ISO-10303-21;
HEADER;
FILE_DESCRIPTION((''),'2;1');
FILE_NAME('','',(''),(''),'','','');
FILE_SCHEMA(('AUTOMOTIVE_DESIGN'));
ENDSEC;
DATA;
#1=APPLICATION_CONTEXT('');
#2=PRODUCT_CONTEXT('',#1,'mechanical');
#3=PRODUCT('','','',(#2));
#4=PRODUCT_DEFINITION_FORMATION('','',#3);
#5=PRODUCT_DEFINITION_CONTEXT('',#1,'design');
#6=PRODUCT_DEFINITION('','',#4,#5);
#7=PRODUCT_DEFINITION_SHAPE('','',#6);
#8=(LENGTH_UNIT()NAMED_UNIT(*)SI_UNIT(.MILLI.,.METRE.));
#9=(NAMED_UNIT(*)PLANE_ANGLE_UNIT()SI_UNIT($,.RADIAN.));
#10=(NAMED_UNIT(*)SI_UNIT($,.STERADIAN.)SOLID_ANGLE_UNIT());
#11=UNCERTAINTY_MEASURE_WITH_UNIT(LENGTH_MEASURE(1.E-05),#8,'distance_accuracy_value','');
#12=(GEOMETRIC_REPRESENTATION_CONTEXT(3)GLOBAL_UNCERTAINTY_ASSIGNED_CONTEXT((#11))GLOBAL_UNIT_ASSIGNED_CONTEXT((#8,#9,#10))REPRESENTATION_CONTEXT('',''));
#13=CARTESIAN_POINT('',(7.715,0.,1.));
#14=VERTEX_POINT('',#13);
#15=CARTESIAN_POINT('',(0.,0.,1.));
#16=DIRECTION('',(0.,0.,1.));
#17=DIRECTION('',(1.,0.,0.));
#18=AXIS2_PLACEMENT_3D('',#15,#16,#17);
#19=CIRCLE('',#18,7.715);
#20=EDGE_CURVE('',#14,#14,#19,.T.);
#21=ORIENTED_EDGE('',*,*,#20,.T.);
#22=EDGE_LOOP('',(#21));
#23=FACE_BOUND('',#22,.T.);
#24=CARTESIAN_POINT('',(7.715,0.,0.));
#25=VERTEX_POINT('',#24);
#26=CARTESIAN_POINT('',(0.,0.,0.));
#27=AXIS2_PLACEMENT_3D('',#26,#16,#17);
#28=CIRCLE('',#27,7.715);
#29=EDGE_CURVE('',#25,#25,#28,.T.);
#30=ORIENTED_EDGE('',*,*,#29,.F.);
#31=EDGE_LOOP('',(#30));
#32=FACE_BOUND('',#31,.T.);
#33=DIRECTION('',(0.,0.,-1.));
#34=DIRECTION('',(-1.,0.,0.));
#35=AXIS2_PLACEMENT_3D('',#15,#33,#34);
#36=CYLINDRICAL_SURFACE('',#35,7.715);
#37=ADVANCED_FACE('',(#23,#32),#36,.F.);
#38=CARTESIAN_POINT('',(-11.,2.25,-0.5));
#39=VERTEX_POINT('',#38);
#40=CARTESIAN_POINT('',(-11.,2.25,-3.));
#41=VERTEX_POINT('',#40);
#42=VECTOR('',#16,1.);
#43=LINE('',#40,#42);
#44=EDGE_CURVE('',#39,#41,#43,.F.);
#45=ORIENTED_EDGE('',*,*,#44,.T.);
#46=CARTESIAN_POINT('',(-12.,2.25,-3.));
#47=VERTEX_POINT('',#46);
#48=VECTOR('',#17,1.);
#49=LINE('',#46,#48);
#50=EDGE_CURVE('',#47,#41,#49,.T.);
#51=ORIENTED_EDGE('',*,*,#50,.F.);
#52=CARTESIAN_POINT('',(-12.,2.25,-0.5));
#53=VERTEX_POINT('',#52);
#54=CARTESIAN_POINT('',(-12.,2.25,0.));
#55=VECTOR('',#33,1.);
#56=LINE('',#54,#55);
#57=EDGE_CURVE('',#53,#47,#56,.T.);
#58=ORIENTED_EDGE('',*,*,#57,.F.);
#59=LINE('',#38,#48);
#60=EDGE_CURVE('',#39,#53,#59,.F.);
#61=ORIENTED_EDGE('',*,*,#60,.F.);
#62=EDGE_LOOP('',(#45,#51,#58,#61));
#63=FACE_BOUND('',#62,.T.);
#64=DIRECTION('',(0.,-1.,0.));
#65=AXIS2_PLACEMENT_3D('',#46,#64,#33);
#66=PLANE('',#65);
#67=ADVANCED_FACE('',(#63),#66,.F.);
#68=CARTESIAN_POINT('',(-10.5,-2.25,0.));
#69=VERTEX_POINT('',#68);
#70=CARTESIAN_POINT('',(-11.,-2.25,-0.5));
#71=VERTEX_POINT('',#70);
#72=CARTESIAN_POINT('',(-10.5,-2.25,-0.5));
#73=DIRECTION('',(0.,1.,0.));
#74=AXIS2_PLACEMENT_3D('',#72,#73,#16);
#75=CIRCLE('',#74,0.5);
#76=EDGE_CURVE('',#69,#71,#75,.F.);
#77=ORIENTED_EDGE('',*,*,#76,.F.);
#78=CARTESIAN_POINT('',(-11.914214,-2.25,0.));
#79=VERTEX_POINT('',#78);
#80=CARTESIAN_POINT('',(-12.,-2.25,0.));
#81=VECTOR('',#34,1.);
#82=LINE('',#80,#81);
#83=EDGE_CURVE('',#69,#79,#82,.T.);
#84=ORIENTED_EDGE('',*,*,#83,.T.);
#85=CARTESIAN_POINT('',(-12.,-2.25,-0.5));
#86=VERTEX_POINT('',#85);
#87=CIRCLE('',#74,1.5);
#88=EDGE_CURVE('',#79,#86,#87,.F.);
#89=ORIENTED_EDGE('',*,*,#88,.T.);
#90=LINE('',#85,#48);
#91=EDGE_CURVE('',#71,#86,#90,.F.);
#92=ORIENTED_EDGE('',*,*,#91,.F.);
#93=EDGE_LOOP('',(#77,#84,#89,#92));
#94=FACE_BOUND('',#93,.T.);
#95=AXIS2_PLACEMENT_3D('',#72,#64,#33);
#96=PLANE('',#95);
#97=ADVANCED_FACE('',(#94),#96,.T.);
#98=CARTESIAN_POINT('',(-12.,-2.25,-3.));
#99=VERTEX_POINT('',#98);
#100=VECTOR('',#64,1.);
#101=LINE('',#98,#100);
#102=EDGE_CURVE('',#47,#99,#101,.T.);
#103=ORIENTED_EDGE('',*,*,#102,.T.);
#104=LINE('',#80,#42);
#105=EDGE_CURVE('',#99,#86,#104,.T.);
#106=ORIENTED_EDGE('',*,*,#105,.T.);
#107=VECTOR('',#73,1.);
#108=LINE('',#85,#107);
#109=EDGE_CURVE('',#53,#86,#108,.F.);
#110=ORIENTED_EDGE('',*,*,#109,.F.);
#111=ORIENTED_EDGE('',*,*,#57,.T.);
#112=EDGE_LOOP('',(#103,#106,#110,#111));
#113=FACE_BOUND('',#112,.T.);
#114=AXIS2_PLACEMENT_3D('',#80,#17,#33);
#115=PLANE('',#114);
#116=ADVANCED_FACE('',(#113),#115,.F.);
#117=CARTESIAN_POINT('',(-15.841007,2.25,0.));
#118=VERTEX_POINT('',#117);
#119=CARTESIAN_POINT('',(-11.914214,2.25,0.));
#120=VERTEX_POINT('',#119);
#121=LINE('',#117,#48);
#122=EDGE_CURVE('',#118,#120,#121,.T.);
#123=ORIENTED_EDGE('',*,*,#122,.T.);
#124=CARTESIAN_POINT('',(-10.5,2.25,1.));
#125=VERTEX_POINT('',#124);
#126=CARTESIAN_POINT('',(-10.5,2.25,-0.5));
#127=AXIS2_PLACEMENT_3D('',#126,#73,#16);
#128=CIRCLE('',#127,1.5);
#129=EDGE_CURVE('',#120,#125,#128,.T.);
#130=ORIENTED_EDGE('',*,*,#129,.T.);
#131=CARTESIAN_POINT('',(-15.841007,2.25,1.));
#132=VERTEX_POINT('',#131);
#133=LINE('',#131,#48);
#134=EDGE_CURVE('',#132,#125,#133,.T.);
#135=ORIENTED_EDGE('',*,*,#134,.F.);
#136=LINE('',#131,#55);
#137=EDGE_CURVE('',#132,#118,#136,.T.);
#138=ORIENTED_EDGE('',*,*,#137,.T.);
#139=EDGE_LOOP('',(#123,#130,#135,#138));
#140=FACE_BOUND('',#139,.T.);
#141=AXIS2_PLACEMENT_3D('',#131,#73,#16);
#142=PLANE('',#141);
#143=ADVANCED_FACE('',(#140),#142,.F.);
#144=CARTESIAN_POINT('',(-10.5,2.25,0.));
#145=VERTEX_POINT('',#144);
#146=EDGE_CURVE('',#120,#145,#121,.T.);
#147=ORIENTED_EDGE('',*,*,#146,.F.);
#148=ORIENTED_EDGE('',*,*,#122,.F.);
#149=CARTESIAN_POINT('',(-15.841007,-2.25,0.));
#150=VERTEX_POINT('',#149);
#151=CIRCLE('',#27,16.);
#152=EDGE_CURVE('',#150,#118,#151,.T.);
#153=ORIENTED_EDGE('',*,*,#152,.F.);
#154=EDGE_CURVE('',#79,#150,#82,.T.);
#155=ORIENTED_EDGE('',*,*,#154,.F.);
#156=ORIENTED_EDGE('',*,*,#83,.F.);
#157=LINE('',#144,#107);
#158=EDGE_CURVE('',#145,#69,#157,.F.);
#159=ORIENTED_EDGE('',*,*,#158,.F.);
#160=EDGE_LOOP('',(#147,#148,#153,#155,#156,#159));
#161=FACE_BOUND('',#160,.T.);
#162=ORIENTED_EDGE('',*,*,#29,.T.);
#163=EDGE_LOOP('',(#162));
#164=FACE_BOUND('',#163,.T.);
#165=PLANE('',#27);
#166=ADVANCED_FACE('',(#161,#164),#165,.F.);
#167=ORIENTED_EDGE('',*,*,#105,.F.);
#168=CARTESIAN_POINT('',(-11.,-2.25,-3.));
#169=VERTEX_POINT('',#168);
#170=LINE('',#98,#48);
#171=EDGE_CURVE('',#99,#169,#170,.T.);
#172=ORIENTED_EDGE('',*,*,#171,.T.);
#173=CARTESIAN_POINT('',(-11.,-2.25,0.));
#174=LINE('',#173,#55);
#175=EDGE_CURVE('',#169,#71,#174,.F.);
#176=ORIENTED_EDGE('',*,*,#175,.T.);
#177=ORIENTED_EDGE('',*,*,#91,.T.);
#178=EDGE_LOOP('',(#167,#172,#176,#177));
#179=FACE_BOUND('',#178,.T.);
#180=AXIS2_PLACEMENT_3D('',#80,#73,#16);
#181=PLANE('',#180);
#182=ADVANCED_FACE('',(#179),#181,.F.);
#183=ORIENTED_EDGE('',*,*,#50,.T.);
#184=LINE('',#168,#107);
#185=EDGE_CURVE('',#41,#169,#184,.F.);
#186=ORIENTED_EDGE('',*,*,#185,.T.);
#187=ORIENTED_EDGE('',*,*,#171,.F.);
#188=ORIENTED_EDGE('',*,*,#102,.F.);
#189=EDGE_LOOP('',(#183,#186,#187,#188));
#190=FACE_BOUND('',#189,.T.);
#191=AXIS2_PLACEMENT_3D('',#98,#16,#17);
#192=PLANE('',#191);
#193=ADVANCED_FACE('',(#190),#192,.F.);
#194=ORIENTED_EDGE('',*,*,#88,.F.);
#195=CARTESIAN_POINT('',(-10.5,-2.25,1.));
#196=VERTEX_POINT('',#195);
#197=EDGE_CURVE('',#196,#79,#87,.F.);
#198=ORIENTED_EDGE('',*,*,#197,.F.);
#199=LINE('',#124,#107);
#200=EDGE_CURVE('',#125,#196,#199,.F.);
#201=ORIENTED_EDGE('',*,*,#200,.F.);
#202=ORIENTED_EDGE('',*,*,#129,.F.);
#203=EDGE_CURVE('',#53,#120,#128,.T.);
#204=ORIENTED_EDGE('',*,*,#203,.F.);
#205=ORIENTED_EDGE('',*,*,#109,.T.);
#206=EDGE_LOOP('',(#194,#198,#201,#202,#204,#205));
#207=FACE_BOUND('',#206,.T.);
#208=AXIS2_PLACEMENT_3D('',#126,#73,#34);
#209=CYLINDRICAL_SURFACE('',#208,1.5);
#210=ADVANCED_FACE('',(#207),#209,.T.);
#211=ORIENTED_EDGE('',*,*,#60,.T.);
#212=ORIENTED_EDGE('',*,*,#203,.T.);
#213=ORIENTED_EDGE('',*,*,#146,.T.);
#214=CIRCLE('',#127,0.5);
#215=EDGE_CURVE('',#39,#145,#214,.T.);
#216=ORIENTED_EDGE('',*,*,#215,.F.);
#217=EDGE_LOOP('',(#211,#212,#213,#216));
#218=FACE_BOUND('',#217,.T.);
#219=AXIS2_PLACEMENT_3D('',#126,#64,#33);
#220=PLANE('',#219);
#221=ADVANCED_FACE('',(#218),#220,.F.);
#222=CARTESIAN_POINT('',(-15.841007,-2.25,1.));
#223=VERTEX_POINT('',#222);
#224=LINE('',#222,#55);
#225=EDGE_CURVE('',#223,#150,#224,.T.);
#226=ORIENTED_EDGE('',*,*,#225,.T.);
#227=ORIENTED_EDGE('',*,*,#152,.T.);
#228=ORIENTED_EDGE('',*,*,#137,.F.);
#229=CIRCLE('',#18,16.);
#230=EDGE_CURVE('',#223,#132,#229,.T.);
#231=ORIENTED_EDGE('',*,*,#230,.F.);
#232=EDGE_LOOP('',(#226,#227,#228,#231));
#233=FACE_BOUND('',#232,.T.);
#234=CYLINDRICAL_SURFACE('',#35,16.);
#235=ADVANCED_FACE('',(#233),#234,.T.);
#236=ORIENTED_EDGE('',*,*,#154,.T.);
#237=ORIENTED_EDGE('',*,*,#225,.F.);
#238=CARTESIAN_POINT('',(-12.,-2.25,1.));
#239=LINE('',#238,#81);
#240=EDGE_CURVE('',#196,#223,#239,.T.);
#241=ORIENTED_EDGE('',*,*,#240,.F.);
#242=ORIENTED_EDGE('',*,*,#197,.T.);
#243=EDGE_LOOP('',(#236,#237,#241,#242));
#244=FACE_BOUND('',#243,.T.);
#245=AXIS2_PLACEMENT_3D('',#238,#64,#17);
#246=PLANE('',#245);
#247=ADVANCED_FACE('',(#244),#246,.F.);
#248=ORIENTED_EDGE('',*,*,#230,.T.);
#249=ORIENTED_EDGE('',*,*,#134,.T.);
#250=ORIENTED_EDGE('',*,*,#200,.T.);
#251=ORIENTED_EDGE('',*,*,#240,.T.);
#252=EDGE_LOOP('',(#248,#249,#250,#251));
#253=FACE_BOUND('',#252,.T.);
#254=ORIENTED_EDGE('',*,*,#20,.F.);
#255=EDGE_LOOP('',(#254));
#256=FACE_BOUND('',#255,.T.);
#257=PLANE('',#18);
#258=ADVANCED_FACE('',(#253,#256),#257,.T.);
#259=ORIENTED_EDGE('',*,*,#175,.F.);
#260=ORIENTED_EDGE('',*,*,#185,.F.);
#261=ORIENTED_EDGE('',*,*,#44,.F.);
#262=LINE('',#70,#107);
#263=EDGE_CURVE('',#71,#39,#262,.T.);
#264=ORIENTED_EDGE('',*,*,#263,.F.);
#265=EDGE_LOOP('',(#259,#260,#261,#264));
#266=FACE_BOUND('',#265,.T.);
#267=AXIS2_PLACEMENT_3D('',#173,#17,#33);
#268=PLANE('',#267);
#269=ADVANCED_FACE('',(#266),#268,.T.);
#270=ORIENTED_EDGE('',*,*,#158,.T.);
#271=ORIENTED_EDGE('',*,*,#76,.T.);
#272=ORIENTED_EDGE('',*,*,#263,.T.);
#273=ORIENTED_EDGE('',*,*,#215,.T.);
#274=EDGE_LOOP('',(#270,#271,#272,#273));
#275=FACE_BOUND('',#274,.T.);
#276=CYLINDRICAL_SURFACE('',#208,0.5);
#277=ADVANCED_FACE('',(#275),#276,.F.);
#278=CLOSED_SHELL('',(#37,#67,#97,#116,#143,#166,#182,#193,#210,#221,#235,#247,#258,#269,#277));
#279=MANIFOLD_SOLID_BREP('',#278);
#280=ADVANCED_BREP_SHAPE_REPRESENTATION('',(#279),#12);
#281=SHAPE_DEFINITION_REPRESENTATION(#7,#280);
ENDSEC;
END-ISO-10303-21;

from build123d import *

# Parameters (mm, degrees)
SKETCH1_R                    = 7.715
BASE_FLANGE1_DEPTH           = 1
EDGE_FLANGE1_STRIP_W         = 5
EDGE_FLANGE1_STRIP_H         = 1
EDGE_FLANGE1_STRIP_CUT_DEPTH = 4.5
EDGE_FLANGE1_DEPTH           = 4.5


# Sheet-metal steps are written as plain solids
with BuildPart() as part:
    # Sketch1 → Base-Flange1 (new body)
    with BuildSketch(Plane.XY):
        with BuildLine():
            Line((-15.841006912, 2.25), (-12, 2.25))
            Line((-12, 2.25), (-12, -2.25))
            Line((-12, -2.25), (-15.841006912, -2.25))
            ThreePointArc((-15.841006912, -2.25), (16, 0), (-15.841006912, 2.25))
        make_face()
        Circle(SKETCH1_R, mode=Mode.SUBTRACT)
    extrude(amount=BASE_FLANGE1_DEPTH)

    # Edge-Flange1 strip (across the edge) → Edge-Flange1 strip cut (cut)
    with BuildSketch(Plane(origin=(-12, -2.25, 0), x_dir=(1, 0, 0), z_dir=(0, 1, 0))):
        with Locations((-1, -0.5)):
            Rectangle(EDGE_FLANGE1_STRIP_W, EDGE_FLANGE1_STRIP_H)
    extrude(amount=EDGE_FLANGE1_STRIP_CUT_DEPTH, mode=Mode.SUBTRACT)

    # Edge-Flange1 section (across the edge) → Edge-Flange1 (add)
    with BuildSketch(Plane(origin=(-12, -2.25, 0), x_dir=(1, 0, 0), z_dir=(0, 1, 0))):
        with BuildLine():
            Line((0, 0.5), (0, 3))
            Line((0, 3), (1, 3))
            Line((1, 3), (1, 0.5))
            ThreePointArc((1, 0.5), (1.146446609, 0.146446609), (1.5, 0))
            Line((1.5, 0), (1.5, -1))
            ThreePointArc((1.5, -1), (0.439339828, -0.560660172), (0, 0.5))
        make_face()
    extrude(amount=EDGE_FLANGE1_DEPTH)


solid = part.part
